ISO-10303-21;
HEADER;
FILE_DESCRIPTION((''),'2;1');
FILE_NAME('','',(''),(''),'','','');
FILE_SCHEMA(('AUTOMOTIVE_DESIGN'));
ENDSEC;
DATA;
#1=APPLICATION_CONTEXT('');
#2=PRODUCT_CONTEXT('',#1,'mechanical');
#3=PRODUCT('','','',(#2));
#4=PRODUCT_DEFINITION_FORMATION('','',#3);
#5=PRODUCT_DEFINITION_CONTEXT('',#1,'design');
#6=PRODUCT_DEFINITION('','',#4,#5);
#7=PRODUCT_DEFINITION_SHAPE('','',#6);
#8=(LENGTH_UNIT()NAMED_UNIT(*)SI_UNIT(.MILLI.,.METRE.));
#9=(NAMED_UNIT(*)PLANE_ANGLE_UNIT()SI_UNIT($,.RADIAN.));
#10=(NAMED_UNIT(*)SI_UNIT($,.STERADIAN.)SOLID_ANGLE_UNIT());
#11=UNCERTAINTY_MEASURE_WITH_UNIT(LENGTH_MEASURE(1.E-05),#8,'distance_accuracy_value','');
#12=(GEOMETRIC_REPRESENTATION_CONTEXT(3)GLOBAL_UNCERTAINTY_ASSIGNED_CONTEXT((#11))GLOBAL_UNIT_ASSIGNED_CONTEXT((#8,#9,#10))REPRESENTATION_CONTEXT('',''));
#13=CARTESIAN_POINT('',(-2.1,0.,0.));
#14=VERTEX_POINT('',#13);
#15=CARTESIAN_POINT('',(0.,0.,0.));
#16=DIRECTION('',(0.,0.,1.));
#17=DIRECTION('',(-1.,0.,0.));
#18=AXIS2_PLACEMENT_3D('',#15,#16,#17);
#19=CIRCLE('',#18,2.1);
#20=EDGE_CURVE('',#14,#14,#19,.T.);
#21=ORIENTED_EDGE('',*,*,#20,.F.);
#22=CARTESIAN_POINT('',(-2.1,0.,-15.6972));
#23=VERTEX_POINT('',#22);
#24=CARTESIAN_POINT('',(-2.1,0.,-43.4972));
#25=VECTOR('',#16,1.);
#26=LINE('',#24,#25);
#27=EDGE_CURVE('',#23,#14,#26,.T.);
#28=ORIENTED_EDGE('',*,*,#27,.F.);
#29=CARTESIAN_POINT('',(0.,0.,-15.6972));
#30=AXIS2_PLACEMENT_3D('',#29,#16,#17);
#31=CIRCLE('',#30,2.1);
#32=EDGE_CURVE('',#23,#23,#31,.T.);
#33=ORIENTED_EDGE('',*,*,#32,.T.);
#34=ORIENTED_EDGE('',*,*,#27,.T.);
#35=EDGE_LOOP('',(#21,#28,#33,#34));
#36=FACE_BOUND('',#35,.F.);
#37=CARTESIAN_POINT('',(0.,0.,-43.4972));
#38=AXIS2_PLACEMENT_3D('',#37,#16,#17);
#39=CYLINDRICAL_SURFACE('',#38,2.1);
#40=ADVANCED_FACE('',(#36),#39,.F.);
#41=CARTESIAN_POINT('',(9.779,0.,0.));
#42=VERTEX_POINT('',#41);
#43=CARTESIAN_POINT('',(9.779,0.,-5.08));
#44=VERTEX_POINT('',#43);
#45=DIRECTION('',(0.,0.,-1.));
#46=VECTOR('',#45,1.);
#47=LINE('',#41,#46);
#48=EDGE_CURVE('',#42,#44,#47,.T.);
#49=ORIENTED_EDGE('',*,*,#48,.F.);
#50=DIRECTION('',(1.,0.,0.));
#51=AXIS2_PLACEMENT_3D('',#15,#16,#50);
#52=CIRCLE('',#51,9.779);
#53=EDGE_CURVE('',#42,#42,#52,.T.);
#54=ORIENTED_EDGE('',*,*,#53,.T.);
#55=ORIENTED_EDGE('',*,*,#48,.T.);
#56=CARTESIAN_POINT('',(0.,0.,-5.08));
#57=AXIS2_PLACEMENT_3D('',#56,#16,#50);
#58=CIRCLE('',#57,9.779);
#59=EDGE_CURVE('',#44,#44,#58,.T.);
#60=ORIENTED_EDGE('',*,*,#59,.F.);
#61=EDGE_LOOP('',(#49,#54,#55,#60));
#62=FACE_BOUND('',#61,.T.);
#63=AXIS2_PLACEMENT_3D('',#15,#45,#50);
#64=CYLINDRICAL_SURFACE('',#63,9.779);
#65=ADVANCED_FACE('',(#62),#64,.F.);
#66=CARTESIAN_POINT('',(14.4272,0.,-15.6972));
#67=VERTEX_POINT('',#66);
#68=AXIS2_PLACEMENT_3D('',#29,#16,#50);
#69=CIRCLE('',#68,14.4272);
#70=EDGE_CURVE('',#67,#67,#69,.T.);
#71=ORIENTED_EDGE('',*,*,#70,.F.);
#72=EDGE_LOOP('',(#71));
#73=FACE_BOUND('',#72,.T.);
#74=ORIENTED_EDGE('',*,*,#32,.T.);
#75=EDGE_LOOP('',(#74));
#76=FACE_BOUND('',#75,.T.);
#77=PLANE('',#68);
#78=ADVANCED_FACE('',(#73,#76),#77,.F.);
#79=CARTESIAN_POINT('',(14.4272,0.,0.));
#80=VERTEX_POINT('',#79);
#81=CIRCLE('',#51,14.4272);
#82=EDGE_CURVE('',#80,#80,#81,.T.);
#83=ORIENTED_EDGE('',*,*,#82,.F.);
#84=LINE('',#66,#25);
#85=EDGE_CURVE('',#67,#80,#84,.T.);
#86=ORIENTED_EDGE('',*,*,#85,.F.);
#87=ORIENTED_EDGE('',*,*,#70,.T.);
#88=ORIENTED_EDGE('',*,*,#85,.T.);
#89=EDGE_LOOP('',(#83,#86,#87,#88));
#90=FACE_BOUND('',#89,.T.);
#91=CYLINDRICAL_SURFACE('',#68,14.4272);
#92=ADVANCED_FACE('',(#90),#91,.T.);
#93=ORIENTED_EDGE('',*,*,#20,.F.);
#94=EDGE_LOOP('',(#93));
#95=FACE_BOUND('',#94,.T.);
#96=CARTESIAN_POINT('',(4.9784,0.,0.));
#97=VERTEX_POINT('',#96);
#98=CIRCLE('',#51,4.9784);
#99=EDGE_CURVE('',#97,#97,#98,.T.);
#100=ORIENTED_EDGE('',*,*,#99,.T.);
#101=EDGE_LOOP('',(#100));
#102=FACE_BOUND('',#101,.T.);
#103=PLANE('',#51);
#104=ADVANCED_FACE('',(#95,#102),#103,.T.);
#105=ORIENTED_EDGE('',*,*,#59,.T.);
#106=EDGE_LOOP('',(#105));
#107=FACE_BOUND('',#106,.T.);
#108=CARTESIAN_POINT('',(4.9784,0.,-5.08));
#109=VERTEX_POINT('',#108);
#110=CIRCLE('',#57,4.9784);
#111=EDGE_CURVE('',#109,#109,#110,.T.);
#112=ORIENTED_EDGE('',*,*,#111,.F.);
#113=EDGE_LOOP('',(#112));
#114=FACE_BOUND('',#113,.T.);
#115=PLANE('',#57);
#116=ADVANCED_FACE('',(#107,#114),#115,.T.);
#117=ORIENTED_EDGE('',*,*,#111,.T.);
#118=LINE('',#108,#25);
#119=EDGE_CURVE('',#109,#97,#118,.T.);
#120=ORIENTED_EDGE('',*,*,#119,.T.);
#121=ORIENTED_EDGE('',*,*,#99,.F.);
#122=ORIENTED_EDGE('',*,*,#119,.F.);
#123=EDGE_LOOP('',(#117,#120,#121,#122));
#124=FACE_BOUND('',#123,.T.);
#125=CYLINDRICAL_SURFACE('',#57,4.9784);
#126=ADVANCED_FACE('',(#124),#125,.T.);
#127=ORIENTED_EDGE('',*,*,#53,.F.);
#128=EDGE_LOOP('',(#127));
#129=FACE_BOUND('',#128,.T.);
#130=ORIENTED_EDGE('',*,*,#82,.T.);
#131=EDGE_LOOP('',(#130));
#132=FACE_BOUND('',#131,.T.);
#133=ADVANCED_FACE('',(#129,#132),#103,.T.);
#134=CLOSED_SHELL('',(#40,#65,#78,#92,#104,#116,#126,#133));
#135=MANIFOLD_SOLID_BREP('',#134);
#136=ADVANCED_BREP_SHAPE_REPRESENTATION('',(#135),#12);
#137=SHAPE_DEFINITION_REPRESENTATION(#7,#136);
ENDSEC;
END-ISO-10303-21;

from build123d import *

# Parameters (mm, degrees)
F4_D     = 4.2
F4_DEPTH = 27.8
F4_TIP   = 1.2618073


# Not quite as in the source:
# - a feature of the source that left no trace in its solid (it failed there, or was rolled back) is left out


with BuildPart() as f1:
    # F0 (on Front) → F1 (revolve)
    with BuildSketch(Plane.XZ):
        Polygon((4.9784, 0), (0, 0), (0, -15.6972), (14.4272, -15.6972), (14.4272, 0), (9.779, 0), (9.779, -5.08), (4.9784, -5.08), align=None)
    revolve(axis=Axis((0, 0, -7.8486), (0, 0, 1)))

    # F4
    with Locations(Plane(origin=(0, 0, -15.6972), x_dir=(1, 0, 0), z_dir=(0, 0, -1))):
        with Locations((0, 0)):
            Hole(F4_D / 2, depth=F4_DEPTH)
            with Locations((0, 0, -(F4_DEPTH + F4_TIP / 2))):  # 118° drill point
                Cone(0, F4_D / 2, F4_TIP, mode=Mode.SUBTRACT)


solid = f1.part
